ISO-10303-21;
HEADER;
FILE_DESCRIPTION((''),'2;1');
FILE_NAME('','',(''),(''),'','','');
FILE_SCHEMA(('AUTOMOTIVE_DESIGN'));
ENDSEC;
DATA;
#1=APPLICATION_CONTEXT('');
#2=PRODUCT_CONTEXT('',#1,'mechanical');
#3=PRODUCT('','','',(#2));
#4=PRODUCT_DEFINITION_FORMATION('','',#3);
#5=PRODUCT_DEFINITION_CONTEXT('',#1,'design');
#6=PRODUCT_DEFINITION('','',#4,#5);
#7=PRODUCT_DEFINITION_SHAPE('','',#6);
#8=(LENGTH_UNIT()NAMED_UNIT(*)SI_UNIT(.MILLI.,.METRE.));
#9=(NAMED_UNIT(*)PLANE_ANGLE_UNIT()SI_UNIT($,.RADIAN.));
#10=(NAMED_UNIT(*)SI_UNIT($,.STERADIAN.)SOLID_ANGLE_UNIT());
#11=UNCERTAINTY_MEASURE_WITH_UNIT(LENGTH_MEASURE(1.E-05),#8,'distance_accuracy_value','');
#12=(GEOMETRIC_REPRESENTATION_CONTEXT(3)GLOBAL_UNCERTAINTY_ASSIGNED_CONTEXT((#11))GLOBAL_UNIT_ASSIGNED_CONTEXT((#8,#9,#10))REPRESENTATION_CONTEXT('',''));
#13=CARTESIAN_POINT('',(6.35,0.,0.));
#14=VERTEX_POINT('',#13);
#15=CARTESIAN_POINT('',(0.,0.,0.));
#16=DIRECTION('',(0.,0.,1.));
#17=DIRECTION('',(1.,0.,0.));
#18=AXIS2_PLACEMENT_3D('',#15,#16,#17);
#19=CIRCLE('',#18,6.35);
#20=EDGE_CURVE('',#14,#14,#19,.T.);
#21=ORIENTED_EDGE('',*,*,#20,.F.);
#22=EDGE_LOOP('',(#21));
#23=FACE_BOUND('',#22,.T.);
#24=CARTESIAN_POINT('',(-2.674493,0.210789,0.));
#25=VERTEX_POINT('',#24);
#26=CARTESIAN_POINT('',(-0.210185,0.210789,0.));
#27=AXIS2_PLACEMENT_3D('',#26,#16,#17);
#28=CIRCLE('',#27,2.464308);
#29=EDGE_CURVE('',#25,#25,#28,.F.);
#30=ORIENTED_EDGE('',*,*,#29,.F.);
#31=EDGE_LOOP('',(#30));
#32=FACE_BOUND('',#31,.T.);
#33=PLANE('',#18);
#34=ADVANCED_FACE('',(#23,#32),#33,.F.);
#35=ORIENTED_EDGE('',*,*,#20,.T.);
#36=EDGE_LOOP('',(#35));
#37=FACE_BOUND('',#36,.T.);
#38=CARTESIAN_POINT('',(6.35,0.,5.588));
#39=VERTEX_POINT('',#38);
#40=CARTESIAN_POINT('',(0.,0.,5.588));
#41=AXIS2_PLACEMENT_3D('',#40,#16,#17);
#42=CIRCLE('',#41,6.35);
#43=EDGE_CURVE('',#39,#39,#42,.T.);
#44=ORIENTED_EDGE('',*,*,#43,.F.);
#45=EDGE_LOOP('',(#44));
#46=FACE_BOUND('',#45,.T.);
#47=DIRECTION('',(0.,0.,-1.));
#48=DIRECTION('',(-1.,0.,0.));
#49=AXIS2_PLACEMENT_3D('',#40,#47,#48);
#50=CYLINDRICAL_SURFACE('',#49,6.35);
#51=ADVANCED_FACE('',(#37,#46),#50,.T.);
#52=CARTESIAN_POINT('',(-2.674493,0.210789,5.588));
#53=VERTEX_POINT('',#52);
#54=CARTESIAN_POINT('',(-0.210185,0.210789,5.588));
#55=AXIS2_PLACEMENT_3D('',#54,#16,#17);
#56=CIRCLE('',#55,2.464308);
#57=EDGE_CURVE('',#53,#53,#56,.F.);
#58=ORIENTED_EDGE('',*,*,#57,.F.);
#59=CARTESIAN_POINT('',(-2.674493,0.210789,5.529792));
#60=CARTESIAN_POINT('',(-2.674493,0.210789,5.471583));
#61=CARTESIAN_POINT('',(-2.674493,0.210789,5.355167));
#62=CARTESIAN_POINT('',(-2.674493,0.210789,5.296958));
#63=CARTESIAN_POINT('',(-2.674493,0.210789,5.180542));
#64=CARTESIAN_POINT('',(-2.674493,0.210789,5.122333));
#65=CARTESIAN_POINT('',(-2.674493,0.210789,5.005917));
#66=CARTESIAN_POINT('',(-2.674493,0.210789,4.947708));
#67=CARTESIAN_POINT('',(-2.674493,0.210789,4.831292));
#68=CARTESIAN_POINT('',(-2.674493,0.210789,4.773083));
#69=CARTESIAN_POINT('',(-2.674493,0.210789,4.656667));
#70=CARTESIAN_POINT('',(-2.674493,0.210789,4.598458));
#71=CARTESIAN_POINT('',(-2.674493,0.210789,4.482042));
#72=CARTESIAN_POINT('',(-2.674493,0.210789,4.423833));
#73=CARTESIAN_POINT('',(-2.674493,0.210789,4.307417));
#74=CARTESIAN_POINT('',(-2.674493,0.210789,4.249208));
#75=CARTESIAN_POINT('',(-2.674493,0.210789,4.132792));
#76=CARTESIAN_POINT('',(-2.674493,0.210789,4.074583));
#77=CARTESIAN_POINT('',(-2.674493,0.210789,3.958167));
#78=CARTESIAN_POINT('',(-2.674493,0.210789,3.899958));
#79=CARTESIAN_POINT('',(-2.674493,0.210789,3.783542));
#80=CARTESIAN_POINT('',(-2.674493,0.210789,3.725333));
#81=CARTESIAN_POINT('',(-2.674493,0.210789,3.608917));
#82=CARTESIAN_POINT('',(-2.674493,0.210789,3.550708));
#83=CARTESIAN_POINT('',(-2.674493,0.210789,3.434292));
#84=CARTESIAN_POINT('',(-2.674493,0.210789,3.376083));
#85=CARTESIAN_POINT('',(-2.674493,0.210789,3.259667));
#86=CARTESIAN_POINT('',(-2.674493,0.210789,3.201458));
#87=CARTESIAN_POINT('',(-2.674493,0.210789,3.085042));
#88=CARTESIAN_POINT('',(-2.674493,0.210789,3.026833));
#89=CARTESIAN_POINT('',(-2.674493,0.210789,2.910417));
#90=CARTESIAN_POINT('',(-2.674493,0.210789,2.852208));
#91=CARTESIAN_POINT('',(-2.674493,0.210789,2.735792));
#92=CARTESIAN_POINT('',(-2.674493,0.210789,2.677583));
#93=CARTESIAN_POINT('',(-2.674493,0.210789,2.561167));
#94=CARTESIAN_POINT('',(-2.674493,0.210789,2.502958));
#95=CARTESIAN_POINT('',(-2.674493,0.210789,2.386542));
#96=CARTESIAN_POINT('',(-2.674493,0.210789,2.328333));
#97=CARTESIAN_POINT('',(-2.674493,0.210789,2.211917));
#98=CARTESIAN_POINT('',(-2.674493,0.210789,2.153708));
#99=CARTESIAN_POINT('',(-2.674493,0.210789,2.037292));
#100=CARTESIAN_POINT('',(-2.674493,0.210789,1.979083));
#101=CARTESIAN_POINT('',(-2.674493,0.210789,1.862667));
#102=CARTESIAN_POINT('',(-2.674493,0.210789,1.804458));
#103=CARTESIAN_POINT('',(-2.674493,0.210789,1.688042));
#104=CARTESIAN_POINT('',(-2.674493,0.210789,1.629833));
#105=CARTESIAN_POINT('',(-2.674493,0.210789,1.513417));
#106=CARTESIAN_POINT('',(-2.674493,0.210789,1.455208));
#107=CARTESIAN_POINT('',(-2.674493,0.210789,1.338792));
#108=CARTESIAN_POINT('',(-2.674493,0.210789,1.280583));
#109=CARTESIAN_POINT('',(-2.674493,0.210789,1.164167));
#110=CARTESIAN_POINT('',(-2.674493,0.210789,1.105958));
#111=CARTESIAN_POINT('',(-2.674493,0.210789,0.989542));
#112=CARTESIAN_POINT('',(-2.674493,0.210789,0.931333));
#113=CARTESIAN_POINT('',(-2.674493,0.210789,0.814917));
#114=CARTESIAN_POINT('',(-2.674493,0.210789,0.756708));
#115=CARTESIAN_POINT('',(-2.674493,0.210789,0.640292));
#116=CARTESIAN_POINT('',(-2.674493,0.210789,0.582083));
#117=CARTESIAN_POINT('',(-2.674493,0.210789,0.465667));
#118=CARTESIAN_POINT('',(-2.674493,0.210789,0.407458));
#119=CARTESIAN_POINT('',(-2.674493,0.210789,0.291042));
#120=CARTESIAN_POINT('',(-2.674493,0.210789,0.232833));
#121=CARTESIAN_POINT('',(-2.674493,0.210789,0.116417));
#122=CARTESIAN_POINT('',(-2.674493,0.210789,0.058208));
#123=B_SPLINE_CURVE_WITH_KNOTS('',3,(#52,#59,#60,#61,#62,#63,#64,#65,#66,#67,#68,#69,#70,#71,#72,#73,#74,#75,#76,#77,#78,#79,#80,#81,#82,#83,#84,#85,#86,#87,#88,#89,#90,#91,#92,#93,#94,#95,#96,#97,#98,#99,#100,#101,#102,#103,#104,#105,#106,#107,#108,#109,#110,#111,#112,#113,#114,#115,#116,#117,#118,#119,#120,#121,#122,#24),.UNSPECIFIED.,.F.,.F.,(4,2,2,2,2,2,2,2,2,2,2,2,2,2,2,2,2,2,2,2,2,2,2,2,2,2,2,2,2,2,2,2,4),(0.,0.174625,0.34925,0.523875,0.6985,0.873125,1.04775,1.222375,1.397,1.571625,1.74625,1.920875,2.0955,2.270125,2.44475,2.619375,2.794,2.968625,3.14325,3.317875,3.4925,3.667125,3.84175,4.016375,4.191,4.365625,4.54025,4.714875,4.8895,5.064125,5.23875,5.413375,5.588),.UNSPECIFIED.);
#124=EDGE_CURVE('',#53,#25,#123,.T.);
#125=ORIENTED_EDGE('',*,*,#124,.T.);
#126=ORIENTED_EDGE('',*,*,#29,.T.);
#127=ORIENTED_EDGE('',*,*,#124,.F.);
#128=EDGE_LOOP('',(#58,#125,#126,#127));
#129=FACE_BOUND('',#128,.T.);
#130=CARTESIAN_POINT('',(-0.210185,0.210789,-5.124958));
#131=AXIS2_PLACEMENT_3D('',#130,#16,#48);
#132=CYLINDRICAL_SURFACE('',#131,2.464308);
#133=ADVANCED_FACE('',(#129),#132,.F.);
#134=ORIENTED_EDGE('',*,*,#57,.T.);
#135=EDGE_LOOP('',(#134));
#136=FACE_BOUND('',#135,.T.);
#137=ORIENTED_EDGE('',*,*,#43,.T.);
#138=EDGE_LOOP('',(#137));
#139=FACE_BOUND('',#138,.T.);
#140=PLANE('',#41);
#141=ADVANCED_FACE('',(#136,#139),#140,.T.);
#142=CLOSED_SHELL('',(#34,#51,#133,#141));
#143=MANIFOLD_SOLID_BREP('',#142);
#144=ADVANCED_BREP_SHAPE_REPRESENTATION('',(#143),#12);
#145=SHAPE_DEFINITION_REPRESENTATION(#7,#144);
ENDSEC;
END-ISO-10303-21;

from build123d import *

# Parameters (mm, degrees)
SKETCH1_R           = 6.35
BOSS_EXTRUDE1_DEPTH = 5.588
CAVITY1_OUTLINE_R   = 2.464308
CAVITY1_DEPTH       = 5.588


# Read off the part's stored shape, not the designer's step: Cavity1
with BuildPart() as part:
    # Sketch1 → Boss-Extrude1 (new body)
    with BuildSketch(Plane.XY):
        Circle(SKETCH1_R)
    extrude(amount=BOSS_EXTRUDE1_DEPTH)

    # Cavity1 outline → Cavity1 (cut)
    with BuildSketch(Plane.XY):
        with Locations((-0.210185, 0.210789276)):
            Circle(CAVITY1_OUTLINE_R)
    extrude(amount=CAVITY1_DEPTH, mode=Mode.SUBTRACT)


solid = part.part
